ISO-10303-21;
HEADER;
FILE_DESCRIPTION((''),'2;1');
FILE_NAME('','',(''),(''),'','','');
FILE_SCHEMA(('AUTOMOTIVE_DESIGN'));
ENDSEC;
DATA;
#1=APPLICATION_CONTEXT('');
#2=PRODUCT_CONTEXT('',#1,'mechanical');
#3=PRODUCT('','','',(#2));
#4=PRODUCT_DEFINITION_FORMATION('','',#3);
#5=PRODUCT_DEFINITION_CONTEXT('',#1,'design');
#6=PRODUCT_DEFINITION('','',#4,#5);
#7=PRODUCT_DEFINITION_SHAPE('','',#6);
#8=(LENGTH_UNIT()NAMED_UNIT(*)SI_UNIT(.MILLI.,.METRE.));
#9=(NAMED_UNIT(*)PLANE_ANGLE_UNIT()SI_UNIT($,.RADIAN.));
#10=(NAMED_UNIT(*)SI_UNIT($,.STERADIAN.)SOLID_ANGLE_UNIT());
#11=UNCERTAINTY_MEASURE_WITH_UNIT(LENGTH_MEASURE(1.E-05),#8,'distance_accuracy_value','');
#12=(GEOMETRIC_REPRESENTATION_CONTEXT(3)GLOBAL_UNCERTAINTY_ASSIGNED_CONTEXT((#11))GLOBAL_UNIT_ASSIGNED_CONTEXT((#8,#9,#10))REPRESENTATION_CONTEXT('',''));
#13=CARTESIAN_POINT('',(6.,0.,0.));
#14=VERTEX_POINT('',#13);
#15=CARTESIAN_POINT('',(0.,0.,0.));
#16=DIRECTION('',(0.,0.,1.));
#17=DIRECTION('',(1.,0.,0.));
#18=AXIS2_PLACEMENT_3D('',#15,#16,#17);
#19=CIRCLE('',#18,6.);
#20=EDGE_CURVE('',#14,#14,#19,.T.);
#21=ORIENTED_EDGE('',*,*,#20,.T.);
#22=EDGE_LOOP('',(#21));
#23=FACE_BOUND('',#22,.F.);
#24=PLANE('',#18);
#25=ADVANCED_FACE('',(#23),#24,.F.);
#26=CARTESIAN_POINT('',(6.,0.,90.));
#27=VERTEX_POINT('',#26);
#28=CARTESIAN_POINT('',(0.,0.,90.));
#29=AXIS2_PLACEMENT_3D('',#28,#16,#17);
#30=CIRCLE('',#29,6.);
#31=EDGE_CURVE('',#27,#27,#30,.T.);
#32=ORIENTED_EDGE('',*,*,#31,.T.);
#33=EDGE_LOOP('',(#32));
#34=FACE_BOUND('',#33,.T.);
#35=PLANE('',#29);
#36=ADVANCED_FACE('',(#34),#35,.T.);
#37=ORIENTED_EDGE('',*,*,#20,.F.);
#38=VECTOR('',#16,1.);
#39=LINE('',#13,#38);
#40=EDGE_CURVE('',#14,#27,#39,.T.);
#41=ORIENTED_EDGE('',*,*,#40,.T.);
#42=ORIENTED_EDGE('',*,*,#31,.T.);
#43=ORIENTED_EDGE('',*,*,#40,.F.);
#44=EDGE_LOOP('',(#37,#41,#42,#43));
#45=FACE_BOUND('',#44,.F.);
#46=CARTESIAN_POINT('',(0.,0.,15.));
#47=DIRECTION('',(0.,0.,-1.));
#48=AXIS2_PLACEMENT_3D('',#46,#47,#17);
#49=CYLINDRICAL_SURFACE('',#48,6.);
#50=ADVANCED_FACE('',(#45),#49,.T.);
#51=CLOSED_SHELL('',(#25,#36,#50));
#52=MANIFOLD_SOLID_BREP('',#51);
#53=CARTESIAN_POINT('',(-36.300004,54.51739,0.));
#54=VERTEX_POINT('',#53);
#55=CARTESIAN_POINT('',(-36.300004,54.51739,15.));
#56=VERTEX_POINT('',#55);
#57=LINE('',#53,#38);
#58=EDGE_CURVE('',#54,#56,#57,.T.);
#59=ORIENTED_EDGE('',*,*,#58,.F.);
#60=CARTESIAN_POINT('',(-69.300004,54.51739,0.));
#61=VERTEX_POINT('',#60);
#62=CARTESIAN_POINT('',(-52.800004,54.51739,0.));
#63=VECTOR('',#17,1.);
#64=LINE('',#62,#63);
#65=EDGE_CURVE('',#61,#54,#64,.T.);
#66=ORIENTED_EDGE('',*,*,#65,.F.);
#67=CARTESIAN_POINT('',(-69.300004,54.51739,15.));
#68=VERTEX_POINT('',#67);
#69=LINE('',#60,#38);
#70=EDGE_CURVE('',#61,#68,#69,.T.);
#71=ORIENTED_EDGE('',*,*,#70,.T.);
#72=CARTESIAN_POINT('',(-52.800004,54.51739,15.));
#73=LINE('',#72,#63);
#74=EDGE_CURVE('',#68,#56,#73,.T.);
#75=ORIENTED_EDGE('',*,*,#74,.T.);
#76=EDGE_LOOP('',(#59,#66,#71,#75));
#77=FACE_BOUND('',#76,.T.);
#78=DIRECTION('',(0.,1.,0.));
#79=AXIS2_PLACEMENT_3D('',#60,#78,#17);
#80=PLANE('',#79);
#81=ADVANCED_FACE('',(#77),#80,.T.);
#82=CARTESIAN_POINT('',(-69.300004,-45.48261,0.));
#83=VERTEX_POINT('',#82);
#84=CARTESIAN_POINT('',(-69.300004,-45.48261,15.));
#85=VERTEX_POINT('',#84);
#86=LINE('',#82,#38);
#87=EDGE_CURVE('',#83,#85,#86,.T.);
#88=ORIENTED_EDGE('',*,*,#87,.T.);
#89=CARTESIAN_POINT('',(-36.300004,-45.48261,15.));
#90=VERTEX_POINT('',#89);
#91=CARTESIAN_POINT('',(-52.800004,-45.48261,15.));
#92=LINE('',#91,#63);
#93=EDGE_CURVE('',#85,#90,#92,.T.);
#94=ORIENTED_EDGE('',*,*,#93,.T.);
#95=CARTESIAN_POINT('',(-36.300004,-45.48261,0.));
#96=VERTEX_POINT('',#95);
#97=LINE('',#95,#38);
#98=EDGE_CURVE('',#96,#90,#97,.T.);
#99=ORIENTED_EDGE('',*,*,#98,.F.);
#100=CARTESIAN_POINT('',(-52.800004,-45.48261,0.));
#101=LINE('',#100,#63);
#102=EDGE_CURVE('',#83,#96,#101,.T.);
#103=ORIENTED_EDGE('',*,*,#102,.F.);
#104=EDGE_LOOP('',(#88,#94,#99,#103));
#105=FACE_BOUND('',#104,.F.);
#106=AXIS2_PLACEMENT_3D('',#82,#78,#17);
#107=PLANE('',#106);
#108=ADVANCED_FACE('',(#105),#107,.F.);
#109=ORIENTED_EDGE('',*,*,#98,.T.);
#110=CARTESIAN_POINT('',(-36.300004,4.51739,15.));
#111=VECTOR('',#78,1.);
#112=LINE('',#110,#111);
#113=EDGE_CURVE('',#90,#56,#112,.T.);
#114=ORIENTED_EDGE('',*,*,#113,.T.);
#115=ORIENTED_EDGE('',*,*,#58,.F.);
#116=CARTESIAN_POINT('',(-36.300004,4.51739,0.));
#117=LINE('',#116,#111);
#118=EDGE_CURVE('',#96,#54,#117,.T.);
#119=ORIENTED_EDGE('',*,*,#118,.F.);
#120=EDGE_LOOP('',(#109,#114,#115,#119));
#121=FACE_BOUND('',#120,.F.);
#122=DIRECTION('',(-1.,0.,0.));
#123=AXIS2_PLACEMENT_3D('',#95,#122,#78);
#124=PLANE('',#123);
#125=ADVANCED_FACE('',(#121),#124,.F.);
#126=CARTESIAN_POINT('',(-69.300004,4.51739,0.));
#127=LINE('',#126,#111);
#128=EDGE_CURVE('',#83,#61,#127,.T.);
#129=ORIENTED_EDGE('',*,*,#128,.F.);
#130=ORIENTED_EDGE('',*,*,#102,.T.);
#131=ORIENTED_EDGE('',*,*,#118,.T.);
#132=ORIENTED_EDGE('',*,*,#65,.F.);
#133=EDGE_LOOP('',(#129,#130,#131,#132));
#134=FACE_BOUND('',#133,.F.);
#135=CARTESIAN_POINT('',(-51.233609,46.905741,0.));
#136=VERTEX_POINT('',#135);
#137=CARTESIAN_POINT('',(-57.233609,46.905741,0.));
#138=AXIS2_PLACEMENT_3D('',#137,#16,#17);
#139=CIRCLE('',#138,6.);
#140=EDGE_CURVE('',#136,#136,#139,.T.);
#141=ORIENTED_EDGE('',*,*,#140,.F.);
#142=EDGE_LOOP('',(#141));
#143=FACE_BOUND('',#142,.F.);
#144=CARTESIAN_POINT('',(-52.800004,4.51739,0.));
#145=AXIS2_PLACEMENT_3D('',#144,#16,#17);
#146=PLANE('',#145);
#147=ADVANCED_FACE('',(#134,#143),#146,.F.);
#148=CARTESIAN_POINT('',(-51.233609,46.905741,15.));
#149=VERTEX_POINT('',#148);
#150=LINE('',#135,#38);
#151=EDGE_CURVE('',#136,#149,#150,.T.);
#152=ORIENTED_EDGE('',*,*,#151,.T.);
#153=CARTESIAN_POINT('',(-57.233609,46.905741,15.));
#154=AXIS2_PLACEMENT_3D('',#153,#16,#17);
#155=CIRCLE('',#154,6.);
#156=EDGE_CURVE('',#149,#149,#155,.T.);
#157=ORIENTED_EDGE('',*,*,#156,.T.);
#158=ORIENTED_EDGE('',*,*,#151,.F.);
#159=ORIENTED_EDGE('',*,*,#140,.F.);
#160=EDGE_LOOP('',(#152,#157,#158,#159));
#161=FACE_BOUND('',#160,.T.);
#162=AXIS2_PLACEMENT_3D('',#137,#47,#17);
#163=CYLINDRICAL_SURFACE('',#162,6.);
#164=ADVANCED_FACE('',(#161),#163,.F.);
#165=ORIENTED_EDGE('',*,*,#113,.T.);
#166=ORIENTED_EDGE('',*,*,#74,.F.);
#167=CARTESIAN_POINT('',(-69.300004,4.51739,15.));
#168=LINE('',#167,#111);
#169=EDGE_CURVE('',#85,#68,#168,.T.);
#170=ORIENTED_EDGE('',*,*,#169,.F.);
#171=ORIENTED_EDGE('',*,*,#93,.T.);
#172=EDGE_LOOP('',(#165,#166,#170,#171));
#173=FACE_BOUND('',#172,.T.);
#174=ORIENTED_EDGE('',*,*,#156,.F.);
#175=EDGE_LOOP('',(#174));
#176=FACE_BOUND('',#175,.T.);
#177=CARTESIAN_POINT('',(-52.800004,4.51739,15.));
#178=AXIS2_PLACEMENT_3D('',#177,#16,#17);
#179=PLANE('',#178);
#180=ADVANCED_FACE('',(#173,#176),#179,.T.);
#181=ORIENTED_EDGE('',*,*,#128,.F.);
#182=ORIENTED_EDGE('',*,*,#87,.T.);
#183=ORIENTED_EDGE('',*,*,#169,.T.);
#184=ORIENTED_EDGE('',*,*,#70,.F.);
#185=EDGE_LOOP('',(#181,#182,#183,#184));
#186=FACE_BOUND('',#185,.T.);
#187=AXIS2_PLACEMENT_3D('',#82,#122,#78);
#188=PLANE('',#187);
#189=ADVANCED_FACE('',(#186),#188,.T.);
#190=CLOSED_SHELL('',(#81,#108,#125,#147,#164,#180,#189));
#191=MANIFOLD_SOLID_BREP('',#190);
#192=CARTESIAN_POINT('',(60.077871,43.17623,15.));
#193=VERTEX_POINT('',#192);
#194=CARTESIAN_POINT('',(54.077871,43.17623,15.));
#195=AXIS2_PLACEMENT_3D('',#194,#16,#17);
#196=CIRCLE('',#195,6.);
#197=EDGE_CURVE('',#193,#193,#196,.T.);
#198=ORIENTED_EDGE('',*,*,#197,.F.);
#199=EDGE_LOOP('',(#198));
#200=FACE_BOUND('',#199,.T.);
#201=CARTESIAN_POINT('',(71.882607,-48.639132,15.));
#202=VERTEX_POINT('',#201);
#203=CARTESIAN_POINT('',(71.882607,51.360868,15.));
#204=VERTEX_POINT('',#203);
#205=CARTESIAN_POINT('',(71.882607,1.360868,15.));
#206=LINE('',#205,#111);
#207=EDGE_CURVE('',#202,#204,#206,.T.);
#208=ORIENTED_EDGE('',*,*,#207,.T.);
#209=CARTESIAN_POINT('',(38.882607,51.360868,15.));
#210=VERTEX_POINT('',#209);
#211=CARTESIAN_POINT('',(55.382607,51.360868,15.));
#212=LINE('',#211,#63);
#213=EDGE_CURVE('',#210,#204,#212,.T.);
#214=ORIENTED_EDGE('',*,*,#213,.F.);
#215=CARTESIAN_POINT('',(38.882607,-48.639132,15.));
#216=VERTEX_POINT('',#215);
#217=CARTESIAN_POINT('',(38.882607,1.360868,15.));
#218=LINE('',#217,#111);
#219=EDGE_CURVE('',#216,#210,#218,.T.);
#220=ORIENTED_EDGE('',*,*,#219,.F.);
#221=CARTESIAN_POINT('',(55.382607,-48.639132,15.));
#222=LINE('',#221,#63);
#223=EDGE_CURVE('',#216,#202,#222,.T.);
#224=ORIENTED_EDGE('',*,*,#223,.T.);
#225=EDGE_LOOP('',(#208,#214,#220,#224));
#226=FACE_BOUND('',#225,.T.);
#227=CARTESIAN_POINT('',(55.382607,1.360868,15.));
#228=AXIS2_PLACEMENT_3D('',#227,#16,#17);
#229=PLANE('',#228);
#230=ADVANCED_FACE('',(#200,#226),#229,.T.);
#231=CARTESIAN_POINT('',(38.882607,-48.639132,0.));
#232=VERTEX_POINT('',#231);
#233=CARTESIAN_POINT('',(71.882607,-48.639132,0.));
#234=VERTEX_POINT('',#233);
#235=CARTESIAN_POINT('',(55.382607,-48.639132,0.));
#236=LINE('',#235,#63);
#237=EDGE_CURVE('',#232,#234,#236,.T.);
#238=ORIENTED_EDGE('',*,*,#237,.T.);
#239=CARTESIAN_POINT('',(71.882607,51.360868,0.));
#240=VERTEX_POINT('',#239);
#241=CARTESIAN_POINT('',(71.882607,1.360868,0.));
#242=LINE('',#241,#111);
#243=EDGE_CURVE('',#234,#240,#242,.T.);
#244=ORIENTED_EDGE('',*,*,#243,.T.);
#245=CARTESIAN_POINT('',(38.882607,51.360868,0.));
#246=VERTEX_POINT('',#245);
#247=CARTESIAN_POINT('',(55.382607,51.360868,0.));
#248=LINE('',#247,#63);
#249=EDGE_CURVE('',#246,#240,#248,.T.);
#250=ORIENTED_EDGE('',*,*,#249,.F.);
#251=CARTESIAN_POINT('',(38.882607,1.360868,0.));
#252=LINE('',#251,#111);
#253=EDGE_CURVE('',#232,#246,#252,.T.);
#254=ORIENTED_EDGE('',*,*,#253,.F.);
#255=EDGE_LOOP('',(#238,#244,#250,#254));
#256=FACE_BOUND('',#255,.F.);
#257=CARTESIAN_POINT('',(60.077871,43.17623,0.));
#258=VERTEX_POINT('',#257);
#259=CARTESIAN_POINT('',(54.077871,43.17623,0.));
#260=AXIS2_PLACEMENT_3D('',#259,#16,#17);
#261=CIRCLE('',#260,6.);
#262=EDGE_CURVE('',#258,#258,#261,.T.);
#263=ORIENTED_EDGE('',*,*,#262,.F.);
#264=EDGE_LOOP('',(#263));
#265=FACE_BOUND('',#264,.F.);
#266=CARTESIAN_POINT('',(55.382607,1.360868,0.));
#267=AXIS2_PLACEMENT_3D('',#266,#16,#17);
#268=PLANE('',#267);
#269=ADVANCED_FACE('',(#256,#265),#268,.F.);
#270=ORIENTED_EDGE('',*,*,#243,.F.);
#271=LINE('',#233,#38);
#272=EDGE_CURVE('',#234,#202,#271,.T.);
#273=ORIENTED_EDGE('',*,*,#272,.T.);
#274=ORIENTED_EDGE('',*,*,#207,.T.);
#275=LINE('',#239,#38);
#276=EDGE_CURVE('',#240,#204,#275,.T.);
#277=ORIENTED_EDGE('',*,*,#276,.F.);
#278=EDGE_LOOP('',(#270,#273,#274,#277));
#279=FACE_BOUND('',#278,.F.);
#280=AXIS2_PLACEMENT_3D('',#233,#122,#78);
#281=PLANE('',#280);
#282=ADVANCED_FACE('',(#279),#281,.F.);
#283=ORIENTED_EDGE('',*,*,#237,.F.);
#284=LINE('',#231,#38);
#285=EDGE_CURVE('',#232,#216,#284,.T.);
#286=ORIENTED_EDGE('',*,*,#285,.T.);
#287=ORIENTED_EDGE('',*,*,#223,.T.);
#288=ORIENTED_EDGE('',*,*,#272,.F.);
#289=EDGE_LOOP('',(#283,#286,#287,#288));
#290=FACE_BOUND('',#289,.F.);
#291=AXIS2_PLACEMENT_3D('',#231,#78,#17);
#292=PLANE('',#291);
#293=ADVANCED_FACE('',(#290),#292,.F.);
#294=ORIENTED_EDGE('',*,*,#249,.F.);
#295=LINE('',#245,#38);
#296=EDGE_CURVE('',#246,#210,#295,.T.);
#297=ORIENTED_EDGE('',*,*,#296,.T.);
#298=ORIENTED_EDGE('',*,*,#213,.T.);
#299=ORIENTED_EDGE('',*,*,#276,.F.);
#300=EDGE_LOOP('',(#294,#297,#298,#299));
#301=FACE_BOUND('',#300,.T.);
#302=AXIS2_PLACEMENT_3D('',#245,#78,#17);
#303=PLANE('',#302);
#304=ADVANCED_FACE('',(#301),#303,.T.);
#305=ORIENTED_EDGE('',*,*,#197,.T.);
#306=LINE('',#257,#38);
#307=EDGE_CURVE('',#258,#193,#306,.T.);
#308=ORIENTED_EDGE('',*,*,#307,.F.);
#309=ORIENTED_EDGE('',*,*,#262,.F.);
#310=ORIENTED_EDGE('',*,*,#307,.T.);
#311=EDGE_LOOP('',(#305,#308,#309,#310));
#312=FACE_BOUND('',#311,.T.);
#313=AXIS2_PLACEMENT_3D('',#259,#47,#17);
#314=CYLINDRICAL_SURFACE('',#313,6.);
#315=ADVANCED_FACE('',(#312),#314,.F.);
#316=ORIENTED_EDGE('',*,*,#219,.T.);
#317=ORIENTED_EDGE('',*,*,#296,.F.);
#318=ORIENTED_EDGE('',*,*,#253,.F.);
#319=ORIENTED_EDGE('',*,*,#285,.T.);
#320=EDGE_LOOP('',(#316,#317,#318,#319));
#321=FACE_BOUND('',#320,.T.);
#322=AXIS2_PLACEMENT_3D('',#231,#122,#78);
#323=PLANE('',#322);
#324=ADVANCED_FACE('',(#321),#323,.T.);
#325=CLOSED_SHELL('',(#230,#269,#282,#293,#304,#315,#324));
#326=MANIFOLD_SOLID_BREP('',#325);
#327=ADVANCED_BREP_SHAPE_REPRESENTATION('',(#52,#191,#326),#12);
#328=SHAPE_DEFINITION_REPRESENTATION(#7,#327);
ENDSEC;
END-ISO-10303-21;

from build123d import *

# Parameters (mm, degrees)
F0_W     = 33
F0_H     = 100
F0_R     = 6
F1_DEPTH = 15
F3_DEPTH = 75


# Not quite as in the source:
# - the program builds the solid bodies; features that only make, move or delete a surface that nothing else refers to are left out


with BuildPart() as f1:
    # F0 (on Top) → F1 (new body)
    with BuildSketch(Plane.XY):
        with Locations((-52.8000037262, 4.5173896843)):
            Rectangle(F0_W, F0_H)
        with Locations((-57.2336092591, 46.9057410955)):
            Circle(F0_R, mode=Mode.SUBTRACT)
    extrude(amount=F1_DEPTH)


with BuildPart() as f1b:
    # F0 (on Top) → F1, piece 2 (new body)
    with BuildSketch(Plane.XY):
        with Locations((55.3826065895, 1.3608676211)):
            Rectangle(F0_W, F0_H)
        with Locations((54.0778711438, 43.1762300432)):
            Circle(F0_R, mode=Mode.SUBTRACT)
    extrude(amount=F1_DEPTH)


with BuildPart() as f1c:
    # F0 (on Top) → F1, piece 3 (new body)
    with BuildSketch(Plane.XY):
        Circle(F0_R)
    extrude(amount=F1_DEPTH)

    # F3 (add): a face of the model
    f3_faces = [f1c.faces().sort_by_distance(p)[0] for p in [
        (0, 0, 15),
    ]]
    extrude(f3_faces, amount=F3_DEPTH)


solid = Compound([f1.part, f1b.part, f1c.part])
